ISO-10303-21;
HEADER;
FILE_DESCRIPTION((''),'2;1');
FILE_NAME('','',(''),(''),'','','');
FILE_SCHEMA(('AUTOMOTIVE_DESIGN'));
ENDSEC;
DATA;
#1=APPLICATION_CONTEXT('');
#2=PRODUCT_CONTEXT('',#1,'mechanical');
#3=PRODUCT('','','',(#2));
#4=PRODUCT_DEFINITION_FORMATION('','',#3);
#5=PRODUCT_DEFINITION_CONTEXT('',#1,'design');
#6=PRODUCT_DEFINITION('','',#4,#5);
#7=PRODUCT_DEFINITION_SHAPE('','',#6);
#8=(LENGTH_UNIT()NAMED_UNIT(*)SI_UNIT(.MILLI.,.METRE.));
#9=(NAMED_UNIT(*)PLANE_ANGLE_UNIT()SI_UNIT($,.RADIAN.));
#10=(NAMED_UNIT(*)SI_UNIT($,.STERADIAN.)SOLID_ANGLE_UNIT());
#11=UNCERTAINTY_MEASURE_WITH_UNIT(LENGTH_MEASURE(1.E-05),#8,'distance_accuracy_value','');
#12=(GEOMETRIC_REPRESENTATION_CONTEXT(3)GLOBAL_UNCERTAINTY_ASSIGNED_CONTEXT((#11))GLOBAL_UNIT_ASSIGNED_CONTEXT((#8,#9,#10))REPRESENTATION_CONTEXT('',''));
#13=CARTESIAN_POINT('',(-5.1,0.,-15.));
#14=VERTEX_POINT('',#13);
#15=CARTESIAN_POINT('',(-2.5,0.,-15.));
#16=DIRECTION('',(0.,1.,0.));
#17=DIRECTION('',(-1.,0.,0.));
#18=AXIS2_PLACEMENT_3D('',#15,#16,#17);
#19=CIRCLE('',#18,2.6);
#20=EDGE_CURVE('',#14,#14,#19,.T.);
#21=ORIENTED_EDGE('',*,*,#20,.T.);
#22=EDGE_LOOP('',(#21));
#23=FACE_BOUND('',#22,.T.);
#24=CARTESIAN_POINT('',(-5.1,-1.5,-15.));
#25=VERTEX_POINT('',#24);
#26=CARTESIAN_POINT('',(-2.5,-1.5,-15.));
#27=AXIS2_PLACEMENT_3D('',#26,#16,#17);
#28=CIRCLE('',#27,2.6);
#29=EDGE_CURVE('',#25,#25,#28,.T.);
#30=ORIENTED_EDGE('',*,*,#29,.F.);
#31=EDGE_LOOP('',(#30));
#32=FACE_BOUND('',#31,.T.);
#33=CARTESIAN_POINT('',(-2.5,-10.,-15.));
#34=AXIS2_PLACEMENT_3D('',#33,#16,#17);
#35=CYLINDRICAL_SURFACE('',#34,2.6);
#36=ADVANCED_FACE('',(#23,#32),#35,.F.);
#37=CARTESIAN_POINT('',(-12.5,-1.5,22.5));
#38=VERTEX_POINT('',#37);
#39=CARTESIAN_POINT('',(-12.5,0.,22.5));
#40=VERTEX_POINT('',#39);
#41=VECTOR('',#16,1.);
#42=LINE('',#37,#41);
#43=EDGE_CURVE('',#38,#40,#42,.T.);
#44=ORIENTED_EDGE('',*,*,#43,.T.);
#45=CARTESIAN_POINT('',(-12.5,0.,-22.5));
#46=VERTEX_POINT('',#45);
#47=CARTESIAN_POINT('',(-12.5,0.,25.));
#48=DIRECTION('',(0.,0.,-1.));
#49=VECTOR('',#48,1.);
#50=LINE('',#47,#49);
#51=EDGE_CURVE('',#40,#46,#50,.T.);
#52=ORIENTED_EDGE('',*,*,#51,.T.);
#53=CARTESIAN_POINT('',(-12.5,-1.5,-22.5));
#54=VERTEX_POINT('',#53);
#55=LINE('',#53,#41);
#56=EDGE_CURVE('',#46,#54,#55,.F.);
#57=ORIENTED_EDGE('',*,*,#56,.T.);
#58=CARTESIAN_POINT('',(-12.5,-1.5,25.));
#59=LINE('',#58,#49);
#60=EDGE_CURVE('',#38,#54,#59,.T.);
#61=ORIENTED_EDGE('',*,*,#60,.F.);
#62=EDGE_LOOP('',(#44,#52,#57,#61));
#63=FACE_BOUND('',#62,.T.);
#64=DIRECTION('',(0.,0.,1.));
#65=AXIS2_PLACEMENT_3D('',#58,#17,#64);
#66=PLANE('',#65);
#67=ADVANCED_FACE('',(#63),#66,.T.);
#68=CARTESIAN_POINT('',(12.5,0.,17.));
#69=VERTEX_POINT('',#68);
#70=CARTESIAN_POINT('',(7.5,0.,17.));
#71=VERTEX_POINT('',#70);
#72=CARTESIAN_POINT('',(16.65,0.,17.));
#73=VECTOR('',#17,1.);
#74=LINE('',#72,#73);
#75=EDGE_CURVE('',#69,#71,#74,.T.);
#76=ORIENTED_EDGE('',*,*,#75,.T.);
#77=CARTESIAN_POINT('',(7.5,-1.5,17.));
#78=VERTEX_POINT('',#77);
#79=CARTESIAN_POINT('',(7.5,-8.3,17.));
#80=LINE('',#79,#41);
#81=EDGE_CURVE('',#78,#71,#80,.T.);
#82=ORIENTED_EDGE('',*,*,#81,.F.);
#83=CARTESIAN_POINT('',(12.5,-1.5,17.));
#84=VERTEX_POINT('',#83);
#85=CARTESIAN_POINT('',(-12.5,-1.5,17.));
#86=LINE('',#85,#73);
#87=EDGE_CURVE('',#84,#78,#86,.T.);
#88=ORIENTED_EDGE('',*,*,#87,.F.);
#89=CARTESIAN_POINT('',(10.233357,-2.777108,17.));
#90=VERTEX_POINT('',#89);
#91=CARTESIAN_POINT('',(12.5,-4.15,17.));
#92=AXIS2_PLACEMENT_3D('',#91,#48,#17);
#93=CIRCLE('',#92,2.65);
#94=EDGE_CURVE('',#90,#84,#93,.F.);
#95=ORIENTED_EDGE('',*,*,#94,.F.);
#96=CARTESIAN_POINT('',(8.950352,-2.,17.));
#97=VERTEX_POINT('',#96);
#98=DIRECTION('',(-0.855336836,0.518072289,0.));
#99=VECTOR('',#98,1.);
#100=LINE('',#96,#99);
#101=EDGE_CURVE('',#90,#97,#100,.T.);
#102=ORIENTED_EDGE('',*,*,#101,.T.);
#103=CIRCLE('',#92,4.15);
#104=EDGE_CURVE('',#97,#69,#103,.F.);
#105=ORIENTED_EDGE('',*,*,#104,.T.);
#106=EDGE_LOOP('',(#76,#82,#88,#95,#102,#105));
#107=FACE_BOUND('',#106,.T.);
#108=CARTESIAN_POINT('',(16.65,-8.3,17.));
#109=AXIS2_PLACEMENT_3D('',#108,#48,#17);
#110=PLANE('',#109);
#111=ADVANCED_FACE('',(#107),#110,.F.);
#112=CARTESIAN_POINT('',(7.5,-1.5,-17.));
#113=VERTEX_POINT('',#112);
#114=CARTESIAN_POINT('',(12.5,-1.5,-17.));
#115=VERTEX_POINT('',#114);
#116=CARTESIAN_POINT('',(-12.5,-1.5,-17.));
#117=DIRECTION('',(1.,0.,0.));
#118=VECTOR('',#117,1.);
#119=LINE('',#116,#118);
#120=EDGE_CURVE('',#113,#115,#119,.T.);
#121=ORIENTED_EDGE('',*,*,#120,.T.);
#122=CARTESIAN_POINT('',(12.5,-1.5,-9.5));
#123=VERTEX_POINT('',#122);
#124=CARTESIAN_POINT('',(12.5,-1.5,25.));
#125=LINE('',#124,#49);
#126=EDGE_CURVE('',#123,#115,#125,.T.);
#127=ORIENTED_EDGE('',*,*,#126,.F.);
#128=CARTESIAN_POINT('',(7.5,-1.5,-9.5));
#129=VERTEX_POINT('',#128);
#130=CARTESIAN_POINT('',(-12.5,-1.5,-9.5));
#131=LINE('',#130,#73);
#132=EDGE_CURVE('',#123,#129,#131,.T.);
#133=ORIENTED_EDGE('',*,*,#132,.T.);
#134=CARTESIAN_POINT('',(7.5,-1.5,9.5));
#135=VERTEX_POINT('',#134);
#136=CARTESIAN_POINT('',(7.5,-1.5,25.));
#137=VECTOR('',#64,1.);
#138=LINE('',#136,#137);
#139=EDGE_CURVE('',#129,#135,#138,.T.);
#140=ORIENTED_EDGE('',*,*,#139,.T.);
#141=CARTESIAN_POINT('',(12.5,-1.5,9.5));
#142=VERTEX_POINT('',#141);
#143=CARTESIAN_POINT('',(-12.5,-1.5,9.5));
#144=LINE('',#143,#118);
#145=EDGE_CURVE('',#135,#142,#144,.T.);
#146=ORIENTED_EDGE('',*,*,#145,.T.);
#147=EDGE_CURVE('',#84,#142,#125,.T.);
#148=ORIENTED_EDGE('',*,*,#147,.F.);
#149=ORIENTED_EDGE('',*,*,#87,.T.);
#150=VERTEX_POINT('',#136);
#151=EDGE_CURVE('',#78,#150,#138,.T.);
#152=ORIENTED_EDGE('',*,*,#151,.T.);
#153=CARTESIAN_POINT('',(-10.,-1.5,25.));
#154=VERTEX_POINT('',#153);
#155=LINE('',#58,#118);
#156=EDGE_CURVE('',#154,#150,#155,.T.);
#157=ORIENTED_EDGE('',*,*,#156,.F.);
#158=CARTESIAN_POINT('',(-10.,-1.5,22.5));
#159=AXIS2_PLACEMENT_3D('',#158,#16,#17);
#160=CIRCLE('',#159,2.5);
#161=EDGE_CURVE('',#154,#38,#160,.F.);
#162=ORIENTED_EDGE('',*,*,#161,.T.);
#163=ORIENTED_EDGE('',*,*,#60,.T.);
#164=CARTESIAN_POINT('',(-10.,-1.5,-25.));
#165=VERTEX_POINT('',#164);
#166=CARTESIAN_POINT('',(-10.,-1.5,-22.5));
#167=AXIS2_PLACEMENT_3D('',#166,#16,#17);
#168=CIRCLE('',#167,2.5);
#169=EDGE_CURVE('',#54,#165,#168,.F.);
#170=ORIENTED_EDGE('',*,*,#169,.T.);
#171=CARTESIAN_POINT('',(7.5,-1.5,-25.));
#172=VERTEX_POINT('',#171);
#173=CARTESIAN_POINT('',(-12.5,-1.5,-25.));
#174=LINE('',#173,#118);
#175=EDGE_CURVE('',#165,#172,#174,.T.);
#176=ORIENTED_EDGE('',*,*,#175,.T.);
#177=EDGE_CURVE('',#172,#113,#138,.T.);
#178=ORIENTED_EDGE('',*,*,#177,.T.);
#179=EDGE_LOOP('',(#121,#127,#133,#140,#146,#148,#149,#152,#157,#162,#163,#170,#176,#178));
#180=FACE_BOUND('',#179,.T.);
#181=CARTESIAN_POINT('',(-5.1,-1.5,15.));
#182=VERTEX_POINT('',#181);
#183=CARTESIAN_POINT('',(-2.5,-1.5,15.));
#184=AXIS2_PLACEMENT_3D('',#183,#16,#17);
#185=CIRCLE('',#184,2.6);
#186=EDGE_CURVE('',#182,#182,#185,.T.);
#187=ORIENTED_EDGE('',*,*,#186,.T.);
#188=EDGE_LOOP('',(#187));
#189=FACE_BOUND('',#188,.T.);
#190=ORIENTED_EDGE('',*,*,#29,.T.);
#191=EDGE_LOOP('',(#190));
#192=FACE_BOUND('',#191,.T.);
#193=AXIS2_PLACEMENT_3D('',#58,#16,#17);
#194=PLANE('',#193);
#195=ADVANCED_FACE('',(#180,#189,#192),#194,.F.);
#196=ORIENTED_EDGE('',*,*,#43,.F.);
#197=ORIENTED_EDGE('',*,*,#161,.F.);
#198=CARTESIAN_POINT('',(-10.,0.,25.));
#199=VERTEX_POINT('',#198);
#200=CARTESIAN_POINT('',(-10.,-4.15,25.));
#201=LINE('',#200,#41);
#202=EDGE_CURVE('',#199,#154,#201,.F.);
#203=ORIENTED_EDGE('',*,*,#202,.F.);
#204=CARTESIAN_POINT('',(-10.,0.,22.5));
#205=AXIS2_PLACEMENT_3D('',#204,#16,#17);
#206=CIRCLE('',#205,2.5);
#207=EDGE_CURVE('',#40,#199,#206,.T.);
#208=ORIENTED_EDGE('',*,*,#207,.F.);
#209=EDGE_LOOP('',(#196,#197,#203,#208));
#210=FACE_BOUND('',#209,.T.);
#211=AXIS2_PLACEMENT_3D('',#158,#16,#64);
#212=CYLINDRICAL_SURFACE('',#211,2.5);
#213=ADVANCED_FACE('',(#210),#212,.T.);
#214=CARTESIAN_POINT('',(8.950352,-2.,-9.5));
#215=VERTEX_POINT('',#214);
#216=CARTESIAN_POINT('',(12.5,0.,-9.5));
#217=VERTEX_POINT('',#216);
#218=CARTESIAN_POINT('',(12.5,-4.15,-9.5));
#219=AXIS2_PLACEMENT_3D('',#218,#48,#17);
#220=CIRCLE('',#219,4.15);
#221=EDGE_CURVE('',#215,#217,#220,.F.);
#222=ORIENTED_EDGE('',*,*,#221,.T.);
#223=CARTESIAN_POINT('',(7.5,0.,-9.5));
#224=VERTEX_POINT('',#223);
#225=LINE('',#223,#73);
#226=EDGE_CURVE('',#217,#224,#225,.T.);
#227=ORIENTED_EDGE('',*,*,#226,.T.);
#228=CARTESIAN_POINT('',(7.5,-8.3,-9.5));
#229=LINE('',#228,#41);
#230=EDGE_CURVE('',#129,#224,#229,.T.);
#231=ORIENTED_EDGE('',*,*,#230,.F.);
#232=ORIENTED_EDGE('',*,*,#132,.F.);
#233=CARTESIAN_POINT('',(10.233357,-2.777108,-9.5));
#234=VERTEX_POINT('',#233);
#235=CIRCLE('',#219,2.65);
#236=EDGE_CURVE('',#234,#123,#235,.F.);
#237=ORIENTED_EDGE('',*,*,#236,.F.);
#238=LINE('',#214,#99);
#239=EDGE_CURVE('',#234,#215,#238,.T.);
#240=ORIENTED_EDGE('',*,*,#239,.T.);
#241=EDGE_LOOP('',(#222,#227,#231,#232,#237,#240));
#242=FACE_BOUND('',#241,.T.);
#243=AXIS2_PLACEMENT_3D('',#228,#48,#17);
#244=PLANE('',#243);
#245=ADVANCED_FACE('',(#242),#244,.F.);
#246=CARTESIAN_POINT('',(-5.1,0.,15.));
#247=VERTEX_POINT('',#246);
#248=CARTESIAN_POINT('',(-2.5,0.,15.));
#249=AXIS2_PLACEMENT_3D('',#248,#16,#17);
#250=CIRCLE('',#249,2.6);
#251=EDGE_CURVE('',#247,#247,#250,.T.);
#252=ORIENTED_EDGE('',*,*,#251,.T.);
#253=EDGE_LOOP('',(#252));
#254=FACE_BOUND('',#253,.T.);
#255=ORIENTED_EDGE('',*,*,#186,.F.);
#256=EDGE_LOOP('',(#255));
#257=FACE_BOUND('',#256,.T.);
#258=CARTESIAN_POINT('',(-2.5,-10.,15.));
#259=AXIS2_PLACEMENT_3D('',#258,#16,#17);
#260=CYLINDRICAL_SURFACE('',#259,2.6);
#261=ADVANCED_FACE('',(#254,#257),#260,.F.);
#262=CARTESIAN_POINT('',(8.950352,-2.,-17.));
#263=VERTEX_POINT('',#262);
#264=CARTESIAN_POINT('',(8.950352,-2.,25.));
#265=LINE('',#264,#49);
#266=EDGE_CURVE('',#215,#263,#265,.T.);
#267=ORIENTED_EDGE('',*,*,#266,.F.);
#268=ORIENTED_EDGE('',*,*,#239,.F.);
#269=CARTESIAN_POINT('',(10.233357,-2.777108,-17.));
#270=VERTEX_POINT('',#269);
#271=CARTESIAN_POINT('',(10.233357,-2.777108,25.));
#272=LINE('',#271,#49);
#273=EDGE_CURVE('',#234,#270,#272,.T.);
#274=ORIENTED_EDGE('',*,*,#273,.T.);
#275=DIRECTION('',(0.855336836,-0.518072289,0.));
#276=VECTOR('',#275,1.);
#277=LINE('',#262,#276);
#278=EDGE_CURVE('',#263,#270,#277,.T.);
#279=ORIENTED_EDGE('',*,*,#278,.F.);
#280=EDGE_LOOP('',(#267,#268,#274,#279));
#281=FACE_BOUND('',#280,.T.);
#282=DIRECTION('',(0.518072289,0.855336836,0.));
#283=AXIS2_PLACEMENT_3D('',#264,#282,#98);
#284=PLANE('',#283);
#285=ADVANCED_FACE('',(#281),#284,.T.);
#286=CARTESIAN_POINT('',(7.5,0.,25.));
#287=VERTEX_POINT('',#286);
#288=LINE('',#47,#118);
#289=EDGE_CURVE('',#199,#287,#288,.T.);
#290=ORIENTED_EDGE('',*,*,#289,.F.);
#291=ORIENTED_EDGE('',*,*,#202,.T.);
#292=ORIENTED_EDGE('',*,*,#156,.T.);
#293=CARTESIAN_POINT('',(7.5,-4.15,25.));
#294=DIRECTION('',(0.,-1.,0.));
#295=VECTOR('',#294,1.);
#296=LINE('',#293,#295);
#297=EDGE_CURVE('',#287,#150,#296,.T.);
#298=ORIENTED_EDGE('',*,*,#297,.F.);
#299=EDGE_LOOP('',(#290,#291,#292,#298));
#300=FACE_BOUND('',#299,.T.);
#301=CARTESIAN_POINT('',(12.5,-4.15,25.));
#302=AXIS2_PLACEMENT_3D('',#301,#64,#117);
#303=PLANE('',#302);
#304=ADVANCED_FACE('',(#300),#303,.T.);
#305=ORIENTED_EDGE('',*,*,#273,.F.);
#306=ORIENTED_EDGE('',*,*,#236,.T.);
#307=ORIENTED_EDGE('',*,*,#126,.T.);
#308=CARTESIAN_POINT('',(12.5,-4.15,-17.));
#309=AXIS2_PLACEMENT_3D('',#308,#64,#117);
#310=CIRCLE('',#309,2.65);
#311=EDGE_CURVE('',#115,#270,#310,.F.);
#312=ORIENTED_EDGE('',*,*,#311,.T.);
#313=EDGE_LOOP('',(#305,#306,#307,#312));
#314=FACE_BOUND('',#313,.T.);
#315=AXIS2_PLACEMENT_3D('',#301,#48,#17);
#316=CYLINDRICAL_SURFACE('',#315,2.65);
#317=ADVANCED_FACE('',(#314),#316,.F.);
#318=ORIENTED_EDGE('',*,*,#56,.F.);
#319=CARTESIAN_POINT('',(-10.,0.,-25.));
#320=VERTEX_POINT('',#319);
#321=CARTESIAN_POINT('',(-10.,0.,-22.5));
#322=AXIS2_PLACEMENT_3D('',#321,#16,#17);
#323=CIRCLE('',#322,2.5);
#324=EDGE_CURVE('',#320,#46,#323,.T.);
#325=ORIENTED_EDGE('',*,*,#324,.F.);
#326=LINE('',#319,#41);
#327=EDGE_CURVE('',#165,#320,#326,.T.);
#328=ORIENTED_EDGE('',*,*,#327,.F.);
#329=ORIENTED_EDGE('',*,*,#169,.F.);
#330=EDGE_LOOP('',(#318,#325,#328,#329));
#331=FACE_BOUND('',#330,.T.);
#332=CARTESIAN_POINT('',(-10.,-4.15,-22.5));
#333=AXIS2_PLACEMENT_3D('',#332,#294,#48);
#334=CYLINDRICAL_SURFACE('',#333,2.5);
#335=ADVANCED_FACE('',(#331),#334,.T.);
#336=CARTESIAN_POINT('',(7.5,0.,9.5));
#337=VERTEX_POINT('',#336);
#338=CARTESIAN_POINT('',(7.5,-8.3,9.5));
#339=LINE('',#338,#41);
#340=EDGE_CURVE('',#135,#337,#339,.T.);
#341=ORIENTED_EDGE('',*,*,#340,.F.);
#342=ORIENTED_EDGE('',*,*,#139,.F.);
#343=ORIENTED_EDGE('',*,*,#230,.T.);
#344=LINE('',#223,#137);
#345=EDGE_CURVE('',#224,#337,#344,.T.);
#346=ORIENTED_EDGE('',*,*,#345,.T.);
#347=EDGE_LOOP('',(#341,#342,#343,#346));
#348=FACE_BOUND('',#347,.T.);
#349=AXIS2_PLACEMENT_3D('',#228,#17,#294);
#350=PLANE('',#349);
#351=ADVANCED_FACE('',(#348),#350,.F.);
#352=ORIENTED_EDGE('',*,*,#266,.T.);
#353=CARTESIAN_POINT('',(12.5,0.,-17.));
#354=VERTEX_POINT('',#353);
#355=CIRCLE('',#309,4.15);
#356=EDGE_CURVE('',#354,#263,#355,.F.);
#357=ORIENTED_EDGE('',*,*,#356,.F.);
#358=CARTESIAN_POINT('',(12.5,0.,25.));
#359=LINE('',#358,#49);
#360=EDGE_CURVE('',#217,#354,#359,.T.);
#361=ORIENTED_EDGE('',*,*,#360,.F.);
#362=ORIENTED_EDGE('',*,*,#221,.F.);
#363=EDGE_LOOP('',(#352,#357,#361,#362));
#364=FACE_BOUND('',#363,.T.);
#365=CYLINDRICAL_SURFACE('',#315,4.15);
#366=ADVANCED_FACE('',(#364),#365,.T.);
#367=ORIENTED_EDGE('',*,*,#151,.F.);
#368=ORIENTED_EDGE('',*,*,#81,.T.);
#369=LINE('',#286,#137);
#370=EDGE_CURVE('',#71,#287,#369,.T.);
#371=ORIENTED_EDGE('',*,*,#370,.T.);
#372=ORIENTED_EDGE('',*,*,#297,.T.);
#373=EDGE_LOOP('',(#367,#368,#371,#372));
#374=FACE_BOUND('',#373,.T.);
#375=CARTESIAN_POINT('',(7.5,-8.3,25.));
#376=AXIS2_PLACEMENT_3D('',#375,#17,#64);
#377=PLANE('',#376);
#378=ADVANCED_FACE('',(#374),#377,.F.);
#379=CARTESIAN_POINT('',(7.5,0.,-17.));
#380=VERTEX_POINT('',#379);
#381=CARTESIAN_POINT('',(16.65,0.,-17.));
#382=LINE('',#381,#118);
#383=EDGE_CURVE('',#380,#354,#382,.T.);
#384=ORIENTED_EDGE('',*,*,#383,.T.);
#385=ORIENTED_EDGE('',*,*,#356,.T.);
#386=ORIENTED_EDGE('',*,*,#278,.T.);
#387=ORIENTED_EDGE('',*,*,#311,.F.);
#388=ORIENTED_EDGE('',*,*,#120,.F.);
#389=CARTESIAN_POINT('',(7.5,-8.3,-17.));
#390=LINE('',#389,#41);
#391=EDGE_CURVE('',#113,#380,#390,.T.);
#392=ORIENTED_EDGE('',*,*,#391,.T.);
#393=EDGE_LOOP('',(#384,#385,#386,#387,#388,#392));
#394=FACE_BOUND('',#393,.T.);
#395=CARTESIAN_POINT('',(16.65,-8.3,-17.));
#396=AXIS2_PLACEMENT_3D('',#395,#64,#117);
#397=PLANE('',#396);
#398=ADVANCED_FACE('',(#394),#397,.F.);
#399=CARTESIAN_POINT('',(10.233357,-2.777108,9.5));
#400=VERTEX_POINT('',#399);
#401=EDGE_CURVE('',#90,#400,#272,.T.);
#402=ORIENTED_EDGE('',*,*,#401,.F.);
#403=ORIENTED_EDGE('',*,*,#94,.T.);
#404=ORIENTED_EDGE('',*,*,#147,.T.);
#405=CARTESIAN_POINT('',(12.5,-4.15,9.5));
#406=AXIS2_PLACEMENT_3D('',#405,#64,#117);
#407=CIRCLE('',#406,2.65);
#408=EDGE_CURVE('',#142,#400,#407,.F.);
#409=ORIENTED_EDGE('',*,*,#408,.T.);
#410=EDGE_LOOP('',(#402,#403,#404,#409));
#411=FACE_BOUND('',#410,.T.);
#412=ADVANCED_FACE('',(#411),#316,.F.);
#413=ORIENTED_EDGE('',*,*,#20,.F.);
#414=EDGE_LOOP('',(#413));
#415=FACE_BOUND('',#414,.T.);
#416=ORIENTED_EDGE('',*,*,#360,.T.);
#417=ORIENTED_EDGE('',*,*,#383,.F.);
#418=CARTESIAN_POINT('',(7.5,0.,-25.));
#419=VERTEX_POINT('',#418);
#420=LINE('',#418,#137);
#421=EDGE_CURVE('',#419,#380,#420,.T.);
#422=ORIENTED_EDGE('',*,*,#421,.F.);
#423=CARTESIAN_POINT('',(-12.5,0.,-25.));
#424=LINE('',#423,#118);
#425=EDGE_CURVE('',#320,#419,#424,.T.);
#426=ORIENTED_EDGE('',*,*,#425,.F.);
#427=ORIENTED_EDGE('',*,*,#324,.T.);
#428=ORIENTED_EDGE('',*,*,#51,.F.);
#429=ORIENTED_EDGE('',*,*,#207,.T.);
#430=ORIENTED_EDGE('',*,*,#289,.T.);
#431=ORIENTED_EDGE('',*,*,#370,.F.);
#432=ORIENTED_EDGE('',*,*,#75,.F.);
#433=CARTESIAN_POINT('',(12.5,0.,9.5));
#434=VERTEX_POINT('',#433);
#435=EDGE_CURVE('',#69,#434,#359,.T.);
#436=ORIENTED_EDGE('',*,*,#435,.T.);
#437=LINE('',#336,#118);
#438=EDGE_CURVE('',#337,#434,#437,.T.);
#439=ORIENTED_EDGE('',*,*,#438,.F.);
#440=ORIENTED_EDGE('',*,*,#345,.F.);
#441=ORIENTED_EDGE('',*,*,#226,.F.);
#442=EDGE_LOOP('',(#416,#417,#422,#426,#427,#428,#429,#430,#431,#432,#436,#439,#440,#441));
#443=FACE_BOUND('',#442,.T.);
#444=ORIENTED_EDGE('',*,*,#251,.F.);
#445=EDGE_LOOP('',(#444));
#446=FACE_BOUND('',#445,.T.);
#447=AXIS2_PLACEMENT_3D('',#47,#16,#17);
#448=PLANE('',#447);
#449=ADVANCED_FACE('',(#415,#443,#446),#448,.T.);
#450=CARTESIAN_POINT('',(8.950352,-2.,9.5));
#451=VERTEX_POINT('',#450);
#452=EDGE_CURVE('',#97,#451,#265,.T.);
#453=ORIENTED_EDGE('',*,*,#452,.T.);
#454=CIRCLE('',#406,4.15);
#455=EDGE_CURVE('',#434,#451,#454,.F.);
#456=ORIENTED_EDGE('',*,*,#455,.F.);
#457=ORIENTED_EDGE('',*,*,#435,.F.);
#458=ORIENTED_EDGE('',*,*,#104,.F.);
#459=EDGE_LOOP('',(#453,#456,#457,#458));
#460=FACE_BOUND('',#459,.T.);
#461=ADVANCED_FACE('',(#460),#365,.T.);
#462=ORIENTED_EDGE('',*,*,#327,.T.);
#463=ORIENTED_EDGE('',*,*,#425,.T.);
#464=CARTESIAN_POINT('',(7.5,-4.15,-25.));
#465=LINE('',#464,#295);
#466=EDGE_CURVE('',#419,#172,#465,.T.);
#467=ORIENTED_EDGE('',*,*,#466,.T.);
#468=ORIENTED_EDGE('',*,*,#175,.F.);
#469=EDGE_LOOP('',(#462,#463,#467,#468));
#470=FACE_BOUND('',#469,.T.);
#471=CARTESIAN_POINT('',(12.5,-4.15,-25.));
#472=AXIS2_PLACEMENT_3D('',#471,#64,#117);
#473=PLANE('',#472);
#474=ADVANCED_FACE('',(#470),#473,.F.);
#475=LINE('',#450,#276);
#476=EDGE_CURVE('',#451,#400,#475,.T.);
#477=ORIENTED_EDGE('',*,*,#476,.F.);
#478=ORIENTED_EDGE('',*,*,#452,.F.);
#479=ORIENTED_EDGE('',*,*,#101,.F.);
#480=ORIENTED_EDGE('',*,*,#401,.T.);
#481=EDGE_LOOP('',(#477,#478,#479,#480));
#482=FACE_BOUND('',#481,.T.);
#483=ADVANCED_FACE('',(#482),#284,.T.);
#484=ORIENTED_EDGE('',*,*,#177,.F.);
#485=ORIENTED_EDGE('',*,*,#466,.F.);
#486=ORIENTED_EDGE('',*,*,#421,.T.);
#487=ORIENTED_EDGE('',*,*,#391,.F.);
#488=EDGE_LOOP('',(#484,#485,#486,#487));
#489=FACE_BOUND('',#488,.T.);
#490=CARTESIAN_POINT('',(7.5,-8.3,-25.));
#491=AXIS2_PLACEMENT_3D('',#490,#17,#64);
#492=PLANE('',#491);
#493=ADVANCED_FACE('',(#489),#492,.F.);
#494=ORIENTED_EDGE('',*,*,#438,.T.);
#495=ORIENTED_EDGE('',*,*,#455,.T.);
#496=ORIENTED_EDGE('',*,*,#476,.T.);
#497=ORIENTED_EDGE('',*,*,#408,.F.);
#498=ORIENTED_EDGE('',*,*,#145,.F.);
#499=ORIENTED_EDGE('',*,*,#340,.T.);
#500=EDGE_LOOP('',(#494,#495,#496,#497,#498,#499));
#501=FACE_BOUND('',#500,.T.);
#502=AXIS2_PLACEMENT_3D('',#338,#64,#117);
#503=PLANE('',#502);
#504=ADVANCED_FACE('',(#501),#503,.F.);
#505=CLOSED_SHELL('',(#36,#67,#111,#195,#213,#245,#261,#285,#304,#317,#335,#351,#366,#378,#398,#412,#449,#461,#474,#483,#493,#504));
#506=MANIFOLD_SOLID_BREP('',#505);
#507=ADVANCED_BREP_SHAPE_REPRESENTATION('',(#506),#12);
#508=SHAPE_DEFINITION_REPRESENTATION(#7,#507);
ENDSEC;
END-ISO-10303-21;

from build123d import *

# Parameters (mm, degrees)
TABAN_FLAN_1_DEPTH    = 25
IZIM9_W               = 9.15
IZIM9_H               = 8
IZIM9_H_2             = 19
KES_EKSTR_ZYON1_DEPTH = 32.162677998
IZIM11_R              = 2.6
KES_EKSTR_ZYON2_DEPTH = 10
RADYUS1_R             = 2.5


# Sheet-metal steps are written as plain solids
with BuildPart() as part:
    # Çizim1 → Taban-Flanş1 (new, symmetric)
    with BuildSketch(Plane.XY):
        with BuildLine():
            Line((-12.5, 0), (12.5, 0))
            ThreePointArc((12.5, 0), (14.537154879, -7.765591238), (8.95035213, -2))
            Line((8.95035213, -2), (10.233357384, -2.777108434))
            ThreePointArc((10.233357384, -2.777108434), (13.800833838, -6.458751031), (12.5, -1.5))
            Line((12.5, -1.5), (-12.5, -1.5))
            Line((-12.5, -1.5), (-12.5, 0))
        make_face()
    extrude(amount=TABAN_FLAN_1_DEPTH, both=True)

    # Çizim9 → Kes-Ekstrüzyon1 (cut, through all)
    with BuildSketch(Plane(origin=(0, 0, 0), x_dir=(1, 0, 0), z_dir=(0, 1, 0))):
        with Locations((12.075, 21)):
            Rectangle(IZIM9_W, IZIM9_H)
        with Locations((12.075, -21)):
            Rectangle(IZIM9_W, IZIM9_H)
        with Locations((12.075, 0)):
            Rectangle(IZIM9_W, IZIM9_H_2)
    extrude(amount=-KES_EKSTR_ZYON1_DEPTH, mode=Mode.SUBTRACT)

    # Çizim11 → Kes-Ekstrüzyon2 (cut)
    with BuildSketch(Plane(origin=(0, 0, 0), x_dir=(1, 0, 0), z_dir=(0, 1, 0))):
        with Locations(Location((-2.5, 15, 0), (0, 0, 180))):
            Circle(IZIM11_R)
        with Locations(Location((-2.5, -15, 0), (0, 0, 180))):
            Circle(IZIM11_R)
    extrude(amount=-KES_EKSTR_ZYON2_DEPTH, mode=Mode.SUBTRACT)

    # Radyus1
    radyus1_edges = [part.edges().sort_by_distance(p)[0] for p in [
        (-12.5, -0.75, 25),
        (-12.5, -0.75, -25),
    ]]
    fillet(radyus1_edges, radius=RADYUS1_R)


solid = part.part
